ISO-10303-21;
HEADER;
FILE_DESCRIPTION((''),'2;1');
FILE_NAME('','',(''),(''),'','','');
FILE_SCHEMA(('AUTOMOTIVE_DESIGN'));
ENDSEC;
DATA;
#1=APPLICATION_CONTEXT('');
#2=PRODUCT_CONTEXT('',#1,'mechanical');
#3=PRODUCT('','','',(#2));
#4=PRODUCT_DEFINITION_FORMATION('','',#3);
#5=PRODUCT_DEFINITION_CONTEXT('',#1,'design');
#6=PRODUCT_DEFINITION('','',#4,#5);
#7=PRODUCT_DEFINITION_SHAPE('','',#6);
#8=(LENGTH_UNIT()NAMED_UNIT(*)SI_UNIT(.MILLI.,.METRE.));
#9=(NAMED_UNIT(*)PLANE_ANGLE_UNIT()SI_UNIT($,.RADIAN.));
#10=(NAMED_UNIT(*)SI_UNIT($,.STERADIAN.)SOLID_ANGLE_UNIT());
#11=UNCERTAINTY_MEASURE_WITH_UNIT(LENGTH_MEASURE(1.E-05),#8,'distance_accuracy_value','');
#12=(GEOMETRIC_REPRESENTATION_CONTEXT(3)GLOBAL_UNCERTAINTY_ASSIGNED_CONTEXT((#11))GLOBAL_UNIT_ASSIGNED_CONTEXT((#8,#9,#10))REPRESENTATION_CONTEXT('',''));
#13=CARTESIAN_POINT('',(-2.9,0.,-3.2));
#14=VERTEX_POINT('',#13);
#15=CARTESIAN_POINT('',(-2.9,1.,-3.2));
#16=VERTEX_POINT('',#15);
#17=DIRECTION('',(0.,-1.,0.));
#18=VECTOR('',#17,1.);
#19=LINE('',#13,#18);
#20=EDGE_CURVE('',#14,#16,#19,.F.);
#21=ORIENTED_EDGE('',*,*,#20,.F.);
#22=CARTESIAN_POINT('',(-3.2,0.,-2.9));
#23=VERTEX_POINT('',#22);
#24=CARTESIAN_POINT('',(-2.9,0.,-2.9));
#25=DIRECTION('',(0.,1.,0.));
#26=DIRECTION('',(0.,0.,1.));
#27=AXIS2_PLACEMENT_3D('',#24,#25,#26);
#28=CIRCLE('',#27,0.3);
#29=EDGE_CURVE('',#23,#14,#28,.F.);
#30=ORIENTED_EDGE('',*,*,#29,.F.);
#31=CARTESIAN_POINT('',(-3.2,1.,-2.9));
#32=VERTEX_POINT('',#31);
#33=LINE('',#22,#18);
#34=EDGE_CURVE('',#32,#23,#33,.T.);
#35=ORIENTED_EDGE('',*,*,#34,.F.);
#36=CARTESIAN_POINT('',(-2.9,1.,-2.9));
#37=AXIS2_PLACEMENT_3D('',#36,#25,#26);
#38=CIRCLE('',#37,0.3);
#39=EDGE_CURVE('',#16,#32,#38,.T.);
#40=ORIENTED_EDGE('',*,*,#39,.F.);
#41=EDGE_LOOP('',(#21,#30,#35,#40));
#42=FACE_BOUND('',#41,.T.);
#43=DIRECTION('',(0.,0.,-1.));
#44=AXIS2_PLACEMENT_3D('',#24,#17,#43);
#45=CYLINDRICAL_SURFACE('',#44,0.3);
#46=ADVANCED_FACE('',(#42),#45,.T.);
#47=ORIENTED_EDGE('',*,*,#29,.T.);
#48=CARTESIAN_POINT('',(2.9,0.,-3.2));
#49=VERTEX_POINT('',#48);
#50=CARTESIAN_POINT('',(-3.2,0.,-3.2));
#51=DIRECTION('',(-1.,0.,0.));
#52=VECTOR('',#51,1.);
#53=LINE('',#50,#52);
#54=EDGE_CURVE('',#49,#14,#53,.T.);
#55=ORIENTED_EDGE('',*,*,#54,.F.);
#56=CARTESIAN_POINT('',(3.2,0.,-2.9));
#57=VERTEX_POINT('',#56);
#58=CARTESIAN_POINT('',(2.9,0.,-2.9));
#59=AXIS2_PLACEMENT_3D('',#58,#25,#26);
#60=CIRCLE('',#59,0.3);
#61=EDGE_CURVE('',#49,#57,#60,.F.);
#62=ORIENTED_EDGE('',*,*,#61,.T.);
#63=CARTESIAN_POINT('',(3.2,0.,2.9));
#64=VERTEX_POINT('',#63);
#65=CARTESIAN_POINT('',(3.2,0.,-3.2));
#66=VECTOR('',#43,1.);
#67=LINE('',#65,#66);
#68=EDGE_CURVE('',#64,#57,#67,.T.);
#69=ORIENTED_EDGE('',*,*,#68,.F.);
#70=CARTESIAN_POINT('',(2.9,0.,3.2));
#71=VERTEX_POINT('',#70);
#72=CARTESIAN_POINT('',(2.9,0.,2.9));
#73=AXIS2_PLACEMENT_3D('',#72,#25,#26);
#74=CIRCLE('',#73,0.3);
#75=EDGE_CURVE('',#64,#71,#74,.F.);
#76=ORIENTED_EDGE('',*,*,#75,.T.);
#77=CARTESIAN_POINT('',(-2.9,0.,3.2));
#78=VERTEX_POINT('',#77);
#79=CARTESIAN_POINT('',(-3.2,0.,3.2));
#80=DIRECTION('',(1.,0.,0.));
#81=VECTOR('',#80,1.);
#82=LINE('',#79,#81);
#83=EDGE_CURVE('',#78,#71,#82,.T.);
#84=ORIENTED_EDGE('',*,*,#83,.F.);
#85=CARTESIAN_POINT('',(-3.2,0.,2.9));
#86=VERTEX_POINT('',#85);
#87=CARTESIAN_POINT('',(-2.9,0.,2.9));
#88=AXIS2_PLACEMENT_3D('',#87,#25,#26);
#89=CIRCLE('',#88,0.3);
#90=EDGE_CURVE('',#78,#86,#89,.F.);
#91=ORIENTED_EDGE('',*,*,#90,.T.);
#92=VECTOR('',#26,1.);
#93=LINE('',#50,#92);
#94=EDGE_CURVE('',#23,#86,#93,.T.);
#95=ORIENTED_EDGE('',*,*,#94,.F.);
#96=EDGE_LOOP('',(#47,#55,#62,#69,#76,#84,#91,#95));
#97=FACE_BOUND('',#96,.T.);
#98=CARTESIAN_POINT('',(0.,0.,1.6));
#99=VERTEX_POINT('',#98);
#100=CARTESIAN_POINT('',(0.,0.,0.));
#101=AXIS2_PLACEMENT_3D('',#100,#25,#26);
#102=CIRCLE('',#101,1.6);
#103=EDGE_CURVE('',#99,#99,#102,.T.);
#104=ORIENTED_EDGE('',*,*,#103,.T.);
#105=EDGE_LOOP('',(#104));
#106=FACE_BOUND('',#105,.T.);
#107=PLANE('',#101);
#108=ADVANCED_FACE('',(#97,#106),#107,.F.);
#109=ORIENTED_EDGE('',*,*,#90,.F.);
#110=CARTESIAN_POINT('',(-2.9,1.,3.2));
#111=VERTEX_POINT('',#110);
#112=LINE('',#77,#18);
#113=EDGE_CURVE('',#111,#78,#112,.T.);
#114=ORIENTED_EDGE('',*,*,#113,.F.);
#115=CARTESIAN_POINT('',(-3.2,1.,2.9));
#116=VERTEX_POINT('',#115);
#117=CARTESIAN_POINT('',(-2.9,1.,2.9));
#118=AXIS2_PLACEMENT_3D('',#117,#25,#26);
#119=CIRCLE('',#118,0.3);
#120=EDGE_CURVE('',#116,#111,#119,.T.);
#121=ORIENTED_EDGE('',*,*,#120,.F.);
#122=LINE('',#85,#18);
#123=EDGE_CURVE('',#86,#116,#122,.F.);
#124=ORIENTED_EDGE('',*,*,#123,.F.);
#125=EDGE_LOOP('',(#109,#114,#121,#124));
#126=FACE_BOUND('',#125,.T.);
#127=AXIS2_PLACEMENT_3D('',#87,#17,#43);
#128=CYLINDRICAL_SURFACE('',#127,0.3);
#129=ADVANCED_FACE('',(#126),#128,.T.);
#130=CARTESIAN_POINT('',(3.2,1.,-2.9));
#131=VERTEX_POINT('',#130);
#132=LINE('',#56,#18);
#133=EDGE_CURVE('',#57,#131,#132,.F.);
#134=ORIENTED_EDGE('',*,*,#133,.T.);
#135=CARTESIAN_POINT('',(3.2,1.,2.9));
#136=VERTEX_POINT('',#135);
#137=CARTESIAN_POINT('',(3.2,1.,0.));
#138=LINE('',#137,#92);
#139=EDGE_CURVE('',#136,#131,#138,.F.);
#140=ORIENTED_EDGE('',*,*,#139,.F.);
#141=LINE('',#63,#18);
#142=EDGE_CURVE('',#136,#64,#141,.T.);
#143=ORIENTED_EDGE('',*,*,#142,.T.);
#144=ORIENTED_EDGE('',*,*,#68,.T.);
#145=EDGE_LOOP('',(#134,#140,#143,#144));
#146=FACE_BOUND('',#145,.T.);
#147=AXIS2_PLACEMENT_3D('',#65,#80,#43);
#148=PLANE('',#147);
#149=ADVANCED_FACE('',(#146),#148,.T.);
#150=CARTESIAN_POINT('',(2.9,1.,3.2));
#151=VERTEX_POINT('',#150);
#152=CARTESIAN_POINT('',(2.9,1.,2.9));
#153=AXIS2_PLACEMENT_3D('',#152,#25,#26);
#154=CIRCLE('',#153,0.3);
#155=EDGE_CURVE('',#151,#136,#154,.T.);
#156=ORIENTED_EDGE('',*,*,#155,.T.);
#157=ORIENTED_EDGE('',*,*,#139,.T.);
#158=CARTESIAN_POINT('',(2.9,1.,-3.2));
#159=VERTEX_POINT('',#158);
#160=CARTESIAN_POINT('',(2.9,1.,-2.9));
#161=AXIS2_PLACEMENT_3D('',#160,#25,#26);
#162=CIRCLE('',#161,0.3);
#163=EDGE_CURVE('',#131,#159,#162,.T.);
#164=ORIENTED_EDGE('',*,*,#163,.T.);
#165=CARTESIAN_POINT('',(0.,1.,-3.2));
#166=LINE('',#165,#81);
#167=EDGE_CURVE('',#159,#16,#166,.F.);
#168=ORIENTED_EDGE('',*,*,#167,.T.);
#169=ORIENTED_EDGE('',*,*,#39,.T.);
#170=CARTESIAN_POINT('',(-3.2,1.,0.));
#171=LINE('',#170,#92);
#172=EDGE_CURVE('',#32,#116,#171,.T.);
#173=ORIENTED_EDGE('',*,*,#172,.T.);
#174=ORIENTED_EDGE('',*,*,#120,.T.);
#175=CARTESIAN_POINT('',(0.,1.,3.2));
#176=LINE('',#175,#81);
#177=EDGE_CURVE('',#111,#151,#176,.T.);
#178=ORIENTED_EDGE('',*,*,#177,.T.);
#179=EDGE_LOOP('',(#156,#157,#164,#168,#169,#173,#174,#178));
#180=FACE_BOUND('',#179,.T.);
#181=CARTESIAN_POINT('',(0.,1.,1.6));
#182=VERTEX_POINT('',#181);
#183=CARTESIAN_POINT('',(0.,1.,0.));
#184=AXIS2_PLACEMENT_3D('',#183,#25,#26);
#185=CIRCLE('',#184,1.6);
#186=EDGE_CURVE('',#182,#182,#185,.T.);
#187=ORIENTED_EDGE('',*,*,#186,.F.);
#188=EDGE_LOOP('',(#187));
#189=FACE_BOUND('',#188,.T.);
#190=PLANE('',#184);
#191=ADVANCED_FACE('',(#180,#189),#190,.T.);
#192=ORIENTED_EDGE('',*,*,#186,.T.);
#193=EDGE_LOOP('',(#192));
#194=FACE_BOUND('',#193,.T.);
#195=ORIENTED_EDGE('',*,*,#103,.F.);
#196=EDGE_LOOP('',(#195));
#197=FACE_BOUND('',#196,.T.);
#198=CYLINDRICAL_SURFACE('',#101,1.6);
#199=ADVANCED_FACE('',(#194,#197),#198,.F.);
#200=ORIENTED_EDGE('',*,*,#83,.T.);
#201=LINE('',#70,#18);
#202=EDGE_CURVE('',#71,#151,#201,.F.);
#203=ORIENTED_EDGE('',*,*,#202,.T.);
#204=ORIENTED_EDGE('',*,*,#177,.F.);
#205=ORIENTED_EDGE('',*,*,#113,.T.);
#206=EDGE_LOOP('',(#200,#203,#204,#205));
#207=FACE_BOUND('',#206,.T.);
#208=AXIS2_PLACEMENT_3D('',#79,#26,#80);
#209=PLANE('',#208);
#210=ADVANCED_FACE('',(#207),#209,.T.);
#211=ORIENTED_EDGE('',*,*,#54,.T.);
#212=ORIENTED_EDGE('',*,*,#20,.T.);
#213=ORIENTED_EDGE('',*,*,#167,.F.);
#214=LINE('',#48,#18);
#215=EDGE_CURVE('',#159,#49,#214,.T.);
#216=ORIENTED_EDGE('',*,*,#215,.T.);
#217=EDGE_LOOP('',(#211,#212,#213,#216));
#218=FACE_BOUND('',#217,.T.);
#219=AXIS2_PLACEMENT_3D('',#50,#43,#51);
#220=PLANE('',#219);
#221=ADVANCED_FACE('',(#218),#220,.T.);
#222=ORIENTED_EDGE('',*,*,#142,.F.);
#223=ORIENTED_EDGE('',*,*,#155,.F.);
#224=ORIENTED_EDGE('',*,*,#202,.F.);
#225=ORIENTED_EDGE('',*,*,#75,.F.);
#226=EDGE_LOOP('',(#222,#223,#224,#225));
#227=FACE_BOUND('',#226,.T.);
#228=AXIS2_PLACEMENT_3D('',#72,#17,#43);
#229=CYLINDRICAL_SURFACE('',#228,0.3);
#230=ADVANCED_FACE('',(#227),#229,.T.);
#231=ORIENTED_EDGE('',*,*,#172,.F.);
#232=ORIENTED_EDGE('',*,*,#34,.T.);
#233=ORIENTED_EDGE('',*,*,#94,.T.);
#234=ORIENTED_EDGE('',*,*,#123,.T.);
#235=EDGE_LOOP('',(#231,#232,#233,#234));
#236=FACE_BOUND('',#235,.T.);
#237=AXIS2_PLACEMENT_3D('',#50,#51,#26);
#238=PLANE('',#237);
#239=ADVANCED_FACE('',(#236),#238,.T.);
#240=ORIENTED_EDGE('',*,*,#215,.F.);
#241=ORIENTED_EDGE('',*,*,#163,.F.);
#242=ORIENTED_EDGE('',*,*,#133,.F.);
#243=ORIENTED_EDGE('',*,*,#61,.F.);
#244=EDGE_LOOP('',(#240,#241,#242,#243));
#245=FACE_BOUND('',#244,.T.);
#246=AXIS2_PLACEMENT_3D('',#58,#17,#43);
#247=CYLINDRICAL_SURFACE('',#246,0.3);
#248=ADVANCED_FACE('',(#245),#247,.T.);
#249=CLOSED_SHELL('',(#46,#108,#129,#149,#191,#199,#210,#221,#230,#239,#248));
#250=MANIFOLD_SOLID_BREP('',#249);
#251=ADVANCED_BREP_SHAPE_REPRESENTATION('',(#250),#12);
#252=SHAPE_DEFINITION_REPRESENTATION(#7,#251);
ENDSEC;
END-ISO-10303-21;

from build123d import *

# Parameters (mm, degrees)
SKETCH1_W            = 6.4
SKETCH1_H            = 6.4
BOSS_EXTRUDE1_DEPTH  = 1
M3_CLEARANCE_HOLE1_D = 3.2
FILLET1_R            = 0.3


with BuildPart() as part:
    # Sketch1 → Boss-Extrude1 (new body)
    with BuildSketch(Plane(origin=(0, 0, 0), x_dir=(1, 0, 0), z_dir=(0, 1, 0))):
        Rectangle(SKETCH1_W, SKETCH1_H)
    extrude(amount=BOSS_EXTRUDE1_DEPTH)

    # M3 Clearance Hole1 (through all)
    with Locations(Plane(origin=(0, 1, 0), x_dir=(1, 0, 0), z_dir=(0, 1, 0))):
        with Locations((0, 0)):
            Hole(M3_CLEARANCE_HOLE1_D / 2)

    # Fillet1
    fillet1_edges = [part.edges().sort_by_distance(p)[0] for p in [
        (3.2, 0.5, 3.2),
        (3.2, 0.5, -3.2),
        (-3.2, 0.5, -3.2),
        (-3.2, 0.5, 3.2),
    ]]
    fillet(fillet1_edges, radius=FILLET1_R)


solid = part.part
